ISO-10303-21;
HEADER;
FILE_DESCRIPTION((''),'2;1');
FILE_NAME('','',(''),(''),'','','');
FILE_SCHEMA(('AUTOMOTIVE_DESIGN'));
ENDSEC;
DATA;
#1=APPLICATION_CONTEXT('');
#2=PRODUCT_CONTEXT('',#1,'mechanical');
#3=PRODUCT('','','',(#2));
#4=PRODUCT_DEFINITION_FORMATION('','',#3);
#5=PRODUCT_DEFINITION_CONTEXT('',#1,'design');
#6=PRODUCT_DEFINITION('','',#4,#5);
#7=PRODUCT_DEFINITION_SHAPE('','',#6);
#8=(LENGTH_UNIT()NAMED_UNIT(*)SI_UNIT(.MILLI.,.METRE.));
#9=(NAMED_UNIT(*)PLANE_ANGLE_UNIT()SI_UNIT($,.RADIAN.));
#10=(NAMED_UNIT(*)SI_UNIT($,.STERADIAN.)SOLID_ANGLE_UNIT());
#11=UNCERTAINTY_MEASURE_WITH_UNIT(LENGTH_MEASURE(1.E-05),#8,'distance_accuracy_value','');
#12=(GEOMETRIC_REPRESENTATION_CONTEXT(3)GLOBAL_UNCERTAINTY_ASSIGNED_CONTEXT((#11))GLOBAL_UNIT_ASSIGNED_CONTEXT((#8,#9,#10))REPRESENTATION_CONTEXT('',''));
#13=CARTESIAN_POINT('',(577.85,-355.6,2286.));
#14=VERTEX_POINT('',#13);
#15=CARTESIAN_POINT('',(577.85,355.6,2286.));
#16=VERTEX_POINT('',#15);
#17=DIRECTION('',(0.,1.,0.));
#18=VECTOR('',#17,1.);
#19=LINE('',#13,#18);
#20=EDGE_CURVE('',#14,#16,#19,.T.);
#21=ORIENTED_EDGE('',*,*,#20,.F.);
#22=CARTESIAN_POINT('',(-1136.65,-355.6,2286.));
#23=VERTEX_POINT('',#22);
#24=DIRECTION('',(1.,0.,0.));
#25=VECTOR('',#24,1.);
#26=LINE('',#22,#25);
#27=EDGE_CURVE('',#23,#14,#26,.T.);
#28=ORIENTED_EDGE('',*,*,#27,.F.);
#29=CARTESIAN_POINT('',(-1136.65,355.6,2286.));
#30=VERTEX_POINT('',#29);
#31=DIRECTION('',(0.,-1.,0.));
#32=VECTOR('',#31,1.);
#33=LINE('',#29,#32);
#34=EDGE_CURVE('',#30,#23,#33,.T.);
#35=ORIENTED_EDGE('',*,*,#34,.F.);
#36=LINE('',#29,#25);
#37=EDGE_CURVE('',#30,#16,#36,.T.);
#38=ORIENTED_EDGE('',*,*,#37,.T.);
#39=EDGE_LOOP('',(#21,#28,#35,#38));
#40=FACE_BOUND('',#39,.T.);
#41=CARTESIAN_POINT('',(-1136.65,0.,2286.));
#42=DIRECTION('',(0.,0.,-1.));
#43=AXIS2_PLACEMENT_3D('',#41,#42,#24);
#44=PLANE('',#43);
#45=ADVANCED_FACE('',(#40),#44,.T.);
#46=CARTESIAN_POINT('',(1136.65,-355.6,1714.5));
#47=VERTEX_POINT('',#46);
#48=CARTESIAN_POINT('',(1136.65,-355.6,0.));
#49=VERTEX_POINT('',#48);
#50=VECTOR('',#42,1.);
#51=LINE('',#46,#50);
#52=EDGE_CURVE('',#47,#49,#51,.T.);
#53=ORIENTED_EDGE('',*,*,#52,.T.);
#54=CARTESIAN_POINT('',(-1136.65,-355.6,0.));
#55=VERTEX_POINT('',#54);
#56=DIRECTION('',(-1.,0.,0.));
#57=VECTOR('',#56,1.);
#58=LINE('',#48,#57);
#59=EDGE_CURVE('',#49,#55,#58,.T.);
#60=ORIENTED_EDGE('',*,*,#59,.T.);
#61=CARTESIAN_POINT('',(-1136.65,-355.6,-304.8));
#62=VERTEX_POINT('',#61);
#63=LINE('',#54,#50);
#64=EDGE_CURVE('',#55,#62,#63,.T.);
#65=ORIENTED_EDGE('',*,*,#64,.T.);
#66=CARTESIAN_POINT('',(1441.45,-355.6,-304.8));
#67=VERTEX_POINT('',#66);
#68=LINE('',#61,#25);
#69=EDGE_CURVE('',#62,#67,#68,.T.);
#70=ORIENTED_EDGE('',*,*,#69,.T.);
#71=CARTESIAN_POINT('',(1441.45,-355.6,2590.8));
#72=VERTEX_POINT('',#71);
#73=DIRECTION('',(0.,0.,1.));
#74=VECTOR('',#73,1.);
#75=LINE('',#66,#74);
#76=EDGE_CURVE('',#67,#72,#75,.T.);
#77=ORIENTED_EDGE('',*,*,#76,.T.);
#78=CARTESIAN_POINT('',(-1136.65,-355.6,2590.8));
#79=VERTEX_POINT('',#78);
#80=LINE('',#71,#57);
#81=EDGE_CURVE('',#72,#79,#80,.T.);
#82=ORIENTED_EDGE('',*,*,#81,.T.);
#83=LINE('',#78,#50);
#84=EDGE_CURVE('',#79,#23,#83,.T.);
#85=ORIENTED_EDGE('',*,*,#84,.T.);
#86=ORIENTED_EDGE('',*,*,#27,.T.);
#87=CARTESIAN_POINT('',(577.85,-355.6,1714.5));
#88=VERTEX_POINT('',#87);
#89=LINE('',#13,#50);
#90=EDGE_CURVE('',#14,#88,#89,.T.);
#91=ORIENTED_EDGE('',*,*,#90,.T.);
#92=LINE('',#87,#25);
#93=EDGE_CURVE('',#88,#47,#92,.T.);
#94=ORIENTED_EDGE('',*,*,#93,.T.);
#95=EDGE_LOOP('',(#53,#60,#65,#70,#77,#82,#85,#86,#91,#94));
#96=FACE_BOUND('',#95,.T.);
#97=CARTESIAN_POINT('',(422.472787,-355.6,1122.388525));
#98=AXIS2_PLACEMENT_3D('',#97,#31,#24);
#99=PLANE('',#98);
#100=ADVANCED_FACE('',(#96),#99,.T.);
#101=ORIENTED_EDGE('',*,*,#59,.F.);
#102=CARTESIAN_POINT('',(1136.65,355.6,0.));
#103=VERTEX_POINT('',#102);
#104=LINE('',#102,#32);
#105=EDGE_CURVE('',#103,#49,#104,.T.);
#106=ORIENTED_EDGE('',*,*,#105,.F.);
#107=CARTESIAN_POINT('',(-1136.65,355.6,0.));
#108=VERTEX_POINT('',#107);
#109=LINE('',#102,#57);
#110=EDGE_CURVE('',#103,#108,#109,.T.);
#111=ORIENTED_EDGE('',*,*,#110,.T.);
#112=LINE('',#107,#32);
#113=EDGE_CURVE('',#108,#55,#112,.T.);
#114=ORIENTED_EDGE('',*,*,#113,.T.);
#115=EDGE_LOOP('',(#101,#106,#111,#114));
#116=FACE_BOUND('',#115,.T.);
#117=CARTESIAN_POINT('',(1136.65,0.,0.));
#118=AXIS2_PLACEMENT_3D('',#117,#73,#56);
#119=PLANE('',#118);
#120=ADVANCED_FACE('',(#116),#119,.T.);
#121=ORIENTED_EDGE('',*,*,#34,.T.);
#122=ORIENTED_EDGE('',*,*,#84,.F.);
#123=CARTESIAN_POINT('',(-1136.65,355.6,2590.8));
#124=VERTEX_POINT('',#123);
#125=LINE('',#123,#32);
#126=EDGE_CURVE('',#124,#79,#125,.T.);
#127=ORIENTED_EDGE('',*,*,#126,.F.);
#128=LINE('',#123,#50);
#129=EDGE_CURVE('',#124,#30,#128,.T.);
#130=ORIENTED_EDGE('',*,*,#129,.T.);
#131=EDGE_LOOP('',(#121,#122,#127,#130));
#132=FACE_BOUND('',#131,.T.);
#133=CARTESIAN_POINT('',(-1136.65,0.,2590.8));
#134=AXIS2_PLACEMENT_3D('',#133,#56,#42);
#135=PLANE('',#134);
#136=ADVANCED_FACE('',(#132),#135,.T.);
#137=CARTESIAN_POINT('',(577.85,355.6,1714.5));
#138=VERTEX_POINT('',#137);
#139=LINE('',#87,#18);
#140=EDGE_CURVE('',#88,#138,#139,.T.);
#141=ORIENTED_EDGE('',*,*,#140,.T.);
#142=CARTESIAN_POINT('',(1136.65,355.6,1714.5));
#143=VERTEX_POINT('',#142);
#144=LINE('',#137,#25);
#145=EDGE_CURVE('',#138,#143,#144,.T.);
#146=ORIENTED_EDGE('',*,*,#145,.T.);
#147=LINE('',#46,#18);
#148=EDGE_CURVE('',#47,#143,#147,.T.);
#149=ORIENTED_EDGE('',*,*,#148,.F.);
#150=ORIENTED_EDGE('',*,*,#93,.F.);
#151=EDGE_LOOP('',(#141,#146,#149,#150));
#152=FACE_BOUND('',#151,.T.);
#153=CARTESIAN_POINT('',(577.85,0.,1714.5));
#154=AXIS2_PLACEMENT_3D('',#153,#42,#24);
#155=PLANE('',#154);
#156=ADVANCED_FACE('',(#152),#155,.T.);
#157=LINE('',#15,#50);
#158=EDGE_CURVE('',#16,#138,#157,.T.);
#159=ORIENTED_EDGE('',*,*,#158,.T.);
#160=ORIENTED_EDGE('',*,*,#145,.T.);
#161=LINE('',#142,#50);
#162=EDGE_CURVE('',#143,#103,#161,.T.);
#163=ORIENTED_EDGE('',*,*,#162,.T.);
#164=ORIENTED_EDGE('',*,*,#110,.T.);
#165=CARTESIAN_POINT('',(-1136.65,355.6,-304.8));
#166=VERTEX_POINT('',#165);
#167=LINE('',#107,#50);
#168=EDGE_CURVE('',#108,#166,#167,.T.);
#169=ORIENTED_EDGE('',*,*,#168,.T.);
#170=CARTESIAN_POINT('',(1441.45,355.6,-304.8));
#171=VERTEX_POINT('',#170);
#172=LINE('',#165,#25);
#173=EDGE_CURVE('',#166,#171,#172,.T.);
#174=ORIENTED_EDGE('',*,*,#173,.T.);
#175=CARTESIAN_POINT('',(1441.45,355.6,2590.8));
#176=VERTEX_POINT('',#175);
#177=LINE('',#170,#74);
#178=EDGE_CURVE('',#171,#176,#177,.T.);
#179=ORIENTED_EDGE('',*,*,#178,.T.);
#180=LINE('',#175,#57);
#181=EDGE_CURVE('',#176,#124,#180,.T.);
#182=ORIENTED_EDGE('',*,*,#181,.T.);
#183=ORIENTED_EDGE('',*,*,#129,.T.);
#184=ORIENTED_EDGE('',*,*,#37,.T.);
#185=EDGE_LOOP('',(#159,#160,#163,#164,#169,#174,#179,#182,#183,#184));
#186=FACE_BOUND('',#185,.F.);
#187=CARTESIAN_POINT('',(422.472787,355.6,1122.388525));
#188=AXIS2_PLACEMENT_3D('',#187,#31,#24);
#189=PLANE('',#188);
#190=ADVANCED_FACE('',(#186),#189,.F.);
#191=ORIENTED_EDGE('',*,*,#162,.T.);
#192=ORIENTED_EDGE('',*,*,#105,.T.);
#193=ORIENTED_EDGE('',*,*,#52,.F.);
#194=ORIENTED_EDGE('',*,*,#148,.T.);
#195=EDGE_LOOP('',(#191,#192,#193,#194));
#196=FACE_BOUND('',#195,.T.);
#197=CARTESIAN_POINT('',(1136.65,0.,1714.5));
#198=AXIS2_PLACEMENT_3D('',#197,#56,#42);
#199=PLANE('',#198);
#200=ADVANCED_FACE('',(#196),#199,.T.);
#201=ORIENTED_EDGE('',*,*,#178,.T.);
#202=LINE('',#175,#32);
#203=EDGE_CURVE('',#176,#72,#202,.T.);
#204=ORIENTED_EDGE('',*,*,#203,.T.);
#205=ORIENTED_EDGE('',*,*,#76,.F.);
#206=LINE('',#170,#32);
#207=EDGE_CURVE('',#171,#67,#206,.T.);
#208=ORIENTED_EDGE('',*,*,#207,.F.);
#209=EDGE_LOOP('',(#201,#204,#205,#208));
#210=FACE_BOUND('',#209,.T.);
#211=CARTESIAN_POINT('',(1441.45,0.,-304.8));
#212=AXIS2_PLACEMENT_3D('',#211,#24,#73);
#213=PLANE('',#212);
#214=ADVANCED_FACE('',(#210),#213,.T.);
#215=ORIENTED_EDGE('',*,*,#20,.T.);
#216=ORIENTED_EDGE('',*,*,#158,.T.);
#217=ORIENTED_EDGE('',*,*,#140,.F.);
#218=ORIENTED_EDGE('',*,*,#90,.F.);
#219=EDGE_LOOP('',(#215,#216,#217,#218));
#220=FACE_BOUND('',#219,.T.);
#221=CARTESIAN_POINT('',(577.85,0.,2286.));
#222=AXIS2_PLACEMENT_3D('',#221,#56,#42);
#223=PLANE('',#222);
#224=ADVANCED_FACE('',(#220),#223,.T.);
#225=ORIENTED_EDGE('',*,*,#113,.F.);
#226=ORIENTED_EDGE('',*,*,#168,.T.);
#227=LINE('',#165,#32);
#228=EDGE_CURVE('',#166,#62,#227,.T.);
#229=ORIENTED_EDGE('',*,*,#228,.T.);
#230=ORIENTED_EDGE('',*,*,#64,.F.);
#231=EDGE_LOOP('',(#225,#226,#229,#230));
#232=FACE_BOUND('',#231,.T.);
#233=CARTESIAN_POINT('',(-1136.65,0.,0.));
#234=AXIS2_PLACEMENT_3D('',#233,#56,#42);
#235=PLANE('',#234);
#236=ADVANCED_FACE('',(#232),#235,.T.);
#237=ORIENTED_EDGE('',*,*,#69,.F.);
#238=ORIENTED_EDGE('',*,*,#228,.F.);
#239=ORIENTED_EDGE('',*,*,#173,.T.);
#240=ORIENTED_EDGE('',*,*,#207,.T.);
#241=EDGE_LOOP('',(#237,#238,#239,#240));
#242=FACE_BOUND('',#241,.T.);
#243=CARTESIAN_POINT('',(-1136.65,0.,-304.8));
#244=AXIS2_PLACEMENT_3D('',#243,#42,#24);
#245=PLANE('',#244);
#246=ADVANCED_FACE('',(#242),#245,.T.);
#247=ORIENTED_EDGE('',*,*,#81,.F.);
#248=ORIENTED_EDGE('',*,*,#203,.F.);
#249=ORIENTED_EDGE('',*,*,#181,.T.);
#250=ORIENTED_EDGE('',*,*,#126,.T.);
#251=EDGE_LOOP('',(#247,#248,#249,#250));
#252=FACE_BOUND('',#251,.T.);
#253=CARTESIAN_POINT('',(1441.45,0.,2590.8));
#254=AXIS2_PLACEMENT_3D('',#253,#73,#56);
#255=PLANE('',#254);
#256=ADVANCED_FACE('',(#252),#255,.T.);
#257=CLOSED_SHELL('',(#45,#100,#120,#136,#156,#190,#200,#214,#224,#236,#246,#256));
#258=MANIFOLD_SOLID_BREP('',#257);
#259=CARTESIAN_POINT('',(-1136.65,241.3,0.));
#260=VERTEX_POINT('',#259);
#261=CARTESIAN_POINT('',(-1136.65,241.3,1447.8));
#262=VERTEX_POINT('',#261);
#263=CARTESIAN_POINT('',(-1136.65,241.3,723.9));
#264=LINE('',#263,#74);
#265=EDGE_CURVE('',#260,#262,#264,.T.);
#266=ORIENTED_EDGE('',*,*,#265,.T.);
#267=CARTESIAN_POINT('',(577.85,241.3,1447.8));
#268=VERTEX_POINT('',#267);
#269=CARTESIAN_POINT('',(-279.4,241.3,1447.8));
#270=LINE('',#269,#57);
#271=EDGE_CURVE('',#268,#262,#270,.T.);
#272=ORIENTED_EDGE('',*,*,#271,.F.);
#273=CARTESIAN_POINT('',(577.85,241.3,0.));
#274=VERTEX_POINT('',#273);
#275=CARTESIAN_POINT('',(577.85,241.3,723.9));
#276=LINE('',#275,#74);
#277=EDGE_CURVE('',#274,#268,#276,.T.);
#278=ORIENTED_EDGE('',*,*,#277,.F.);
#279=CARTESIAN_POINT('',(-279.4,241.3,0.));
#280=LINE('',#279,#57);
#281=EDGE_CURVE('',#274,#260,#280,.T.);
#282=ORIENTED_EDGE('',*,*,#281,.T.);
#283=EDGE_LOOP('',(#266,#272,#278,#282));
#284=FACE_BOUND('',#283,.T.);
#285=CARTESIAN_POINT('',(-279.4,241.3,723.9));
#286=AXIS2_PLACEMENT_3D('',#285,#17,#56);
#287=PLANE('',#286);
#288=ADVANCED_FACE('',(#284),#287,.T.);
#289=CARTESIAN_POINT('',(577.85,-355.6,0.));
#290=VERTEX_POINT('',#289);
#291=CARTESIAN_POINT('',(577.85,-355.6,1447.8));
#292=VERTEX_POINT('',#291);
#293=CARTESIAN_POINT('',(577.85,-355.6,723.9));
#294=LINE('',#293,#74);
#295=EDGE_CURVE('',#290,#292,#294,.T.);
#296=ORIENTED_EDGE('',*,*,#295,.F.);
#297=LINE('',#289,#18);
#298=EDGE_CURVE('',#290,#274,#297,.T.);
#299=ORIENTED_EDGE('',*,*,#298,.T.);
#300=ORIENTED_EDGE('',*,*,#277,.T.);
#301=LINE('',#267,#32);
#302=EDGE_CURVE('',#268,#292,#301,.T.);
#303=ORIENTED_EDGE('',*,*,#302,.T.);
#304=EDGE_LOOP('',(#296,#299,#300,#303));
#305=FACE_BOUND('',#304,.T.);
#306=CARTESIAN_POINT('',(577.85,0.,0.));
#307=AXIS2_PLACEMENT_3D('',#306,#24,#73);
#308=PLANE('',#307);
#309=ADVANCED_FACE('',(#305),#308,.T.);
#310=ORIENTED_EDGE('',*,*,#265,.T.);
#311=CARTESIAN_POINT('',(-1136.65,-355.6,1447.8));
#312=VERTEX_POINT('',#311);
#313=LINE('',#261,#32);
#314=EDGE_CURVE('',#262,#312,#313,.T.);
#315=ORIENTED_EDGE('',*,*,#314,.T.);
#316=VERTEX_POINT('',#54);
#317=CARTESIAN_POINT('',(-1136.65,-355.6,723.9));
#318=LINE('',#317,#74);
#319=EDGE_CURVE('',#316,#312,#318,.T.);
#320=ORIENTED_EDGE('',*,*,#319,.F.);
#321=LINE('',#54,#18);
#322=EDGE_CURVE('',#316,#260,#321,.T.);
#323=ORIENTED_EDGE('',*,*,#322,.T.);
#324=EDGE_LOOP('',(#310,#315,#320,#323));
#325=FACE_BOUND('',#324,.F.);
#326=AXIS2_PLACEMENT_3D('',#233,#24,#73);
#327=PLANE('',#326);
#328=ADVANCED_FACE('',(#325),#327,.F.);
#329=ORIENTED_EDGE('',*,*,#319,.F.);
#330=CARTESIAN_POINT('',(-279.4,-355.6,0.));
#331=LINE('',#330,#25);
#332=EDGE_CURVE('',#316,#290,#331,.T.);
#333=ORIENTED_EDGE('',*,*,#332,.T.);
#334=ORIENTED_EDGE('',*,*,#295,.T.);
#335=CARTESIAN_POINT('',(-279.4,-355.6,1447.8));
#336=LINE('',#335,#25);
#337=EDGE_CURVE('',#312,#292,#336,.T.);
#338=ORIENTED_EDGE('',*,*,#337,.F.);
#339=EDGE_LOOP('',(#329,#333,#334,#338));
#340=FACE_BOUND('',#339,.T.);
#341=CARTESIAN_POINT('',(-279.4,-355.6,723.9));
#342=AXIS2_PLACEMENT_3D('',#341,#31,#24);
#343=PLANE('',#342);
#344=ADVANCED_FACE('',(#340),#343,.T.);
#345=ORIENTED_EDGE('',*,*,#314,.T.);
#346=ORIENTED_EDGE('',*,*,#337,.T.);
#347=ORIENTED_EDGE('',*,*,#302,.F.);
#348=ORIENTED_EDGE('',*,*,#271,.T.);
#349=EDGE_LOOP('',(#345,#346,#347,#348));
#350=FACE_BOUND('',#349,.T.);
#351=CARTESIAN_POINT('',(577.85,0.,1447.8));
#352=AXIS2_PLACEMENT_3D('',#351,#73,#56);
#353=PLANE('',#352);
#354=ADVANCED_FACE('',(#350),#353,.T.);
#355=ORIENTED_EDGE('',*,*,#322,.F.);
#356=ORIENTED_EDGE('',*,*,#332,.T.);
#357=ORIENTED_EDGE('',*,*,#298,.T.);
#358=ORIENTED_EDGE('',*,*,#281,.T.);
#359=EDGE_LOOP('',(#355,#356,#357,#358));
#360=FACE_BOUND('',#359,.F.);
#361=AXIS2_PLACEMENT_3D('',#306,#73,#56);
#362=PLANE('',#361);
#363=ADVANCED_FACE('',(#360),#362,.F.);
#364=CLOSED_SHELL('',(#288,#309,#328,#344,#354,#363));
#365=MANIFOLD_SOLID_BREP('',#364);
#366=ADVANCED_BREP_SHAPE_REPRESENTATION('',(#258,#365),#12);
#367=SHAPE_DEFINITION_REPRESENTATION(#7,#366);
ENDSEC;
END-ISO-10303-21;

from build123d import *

# Parameters (mm, degrees)
F1_DEPTH = 355.6
F2_W     = 1714.5
F2_H     = 1447.8
F3_DEPTH = 355.6
F4_W     = 1714.5
F4_H     = 1447.8
F5_DEPTH = 241.3


# Not quite as in the source:
# - a length typed as a fraction of an inch, garbled in the dataset ("3 / 203.2 mm" for 3/8 in), is restored


with BuildPart() as f1:
    # F0 (on Front) → F1 (new body, symmetric)
    with BuildSketch(Plane.XZ):
        Polygon((1136.65, 1714.5), (1136.65, 0), (-1136.65, 0), (-1136.65, -304.8), (1441.45, -304.8), (1441.45, 2590.8), (-1136.65, 2590.8), (-1136.65, 2286), (577.85, 2286), (577.85, 1714.5), align=None)
    extrude(amount=F1_DEPTH, both=True)


with BuildPart() as f3:
    # F2 (on Front) → F3 (new body)
    with BuildSketch(Plane.XZ):
        with Locations((-279.4, 723.9)):
            Rectangle(F2_W, F2_H)
    extrude(amount=F3_DEPTH)

    # F4 (on face) → F5 (join)
    with BuildSketch(Plane(origin=(0, 0, 0), x_dir=(-1, 0, 0), z_dir=(0, 1, 0))):
        with Locations((279.4, 723.9)):
            Rectangle(F4_W, F4_H)
    extrude(amount=F5_DEPTH)


solid = Compound([f1.part, f3.part])
